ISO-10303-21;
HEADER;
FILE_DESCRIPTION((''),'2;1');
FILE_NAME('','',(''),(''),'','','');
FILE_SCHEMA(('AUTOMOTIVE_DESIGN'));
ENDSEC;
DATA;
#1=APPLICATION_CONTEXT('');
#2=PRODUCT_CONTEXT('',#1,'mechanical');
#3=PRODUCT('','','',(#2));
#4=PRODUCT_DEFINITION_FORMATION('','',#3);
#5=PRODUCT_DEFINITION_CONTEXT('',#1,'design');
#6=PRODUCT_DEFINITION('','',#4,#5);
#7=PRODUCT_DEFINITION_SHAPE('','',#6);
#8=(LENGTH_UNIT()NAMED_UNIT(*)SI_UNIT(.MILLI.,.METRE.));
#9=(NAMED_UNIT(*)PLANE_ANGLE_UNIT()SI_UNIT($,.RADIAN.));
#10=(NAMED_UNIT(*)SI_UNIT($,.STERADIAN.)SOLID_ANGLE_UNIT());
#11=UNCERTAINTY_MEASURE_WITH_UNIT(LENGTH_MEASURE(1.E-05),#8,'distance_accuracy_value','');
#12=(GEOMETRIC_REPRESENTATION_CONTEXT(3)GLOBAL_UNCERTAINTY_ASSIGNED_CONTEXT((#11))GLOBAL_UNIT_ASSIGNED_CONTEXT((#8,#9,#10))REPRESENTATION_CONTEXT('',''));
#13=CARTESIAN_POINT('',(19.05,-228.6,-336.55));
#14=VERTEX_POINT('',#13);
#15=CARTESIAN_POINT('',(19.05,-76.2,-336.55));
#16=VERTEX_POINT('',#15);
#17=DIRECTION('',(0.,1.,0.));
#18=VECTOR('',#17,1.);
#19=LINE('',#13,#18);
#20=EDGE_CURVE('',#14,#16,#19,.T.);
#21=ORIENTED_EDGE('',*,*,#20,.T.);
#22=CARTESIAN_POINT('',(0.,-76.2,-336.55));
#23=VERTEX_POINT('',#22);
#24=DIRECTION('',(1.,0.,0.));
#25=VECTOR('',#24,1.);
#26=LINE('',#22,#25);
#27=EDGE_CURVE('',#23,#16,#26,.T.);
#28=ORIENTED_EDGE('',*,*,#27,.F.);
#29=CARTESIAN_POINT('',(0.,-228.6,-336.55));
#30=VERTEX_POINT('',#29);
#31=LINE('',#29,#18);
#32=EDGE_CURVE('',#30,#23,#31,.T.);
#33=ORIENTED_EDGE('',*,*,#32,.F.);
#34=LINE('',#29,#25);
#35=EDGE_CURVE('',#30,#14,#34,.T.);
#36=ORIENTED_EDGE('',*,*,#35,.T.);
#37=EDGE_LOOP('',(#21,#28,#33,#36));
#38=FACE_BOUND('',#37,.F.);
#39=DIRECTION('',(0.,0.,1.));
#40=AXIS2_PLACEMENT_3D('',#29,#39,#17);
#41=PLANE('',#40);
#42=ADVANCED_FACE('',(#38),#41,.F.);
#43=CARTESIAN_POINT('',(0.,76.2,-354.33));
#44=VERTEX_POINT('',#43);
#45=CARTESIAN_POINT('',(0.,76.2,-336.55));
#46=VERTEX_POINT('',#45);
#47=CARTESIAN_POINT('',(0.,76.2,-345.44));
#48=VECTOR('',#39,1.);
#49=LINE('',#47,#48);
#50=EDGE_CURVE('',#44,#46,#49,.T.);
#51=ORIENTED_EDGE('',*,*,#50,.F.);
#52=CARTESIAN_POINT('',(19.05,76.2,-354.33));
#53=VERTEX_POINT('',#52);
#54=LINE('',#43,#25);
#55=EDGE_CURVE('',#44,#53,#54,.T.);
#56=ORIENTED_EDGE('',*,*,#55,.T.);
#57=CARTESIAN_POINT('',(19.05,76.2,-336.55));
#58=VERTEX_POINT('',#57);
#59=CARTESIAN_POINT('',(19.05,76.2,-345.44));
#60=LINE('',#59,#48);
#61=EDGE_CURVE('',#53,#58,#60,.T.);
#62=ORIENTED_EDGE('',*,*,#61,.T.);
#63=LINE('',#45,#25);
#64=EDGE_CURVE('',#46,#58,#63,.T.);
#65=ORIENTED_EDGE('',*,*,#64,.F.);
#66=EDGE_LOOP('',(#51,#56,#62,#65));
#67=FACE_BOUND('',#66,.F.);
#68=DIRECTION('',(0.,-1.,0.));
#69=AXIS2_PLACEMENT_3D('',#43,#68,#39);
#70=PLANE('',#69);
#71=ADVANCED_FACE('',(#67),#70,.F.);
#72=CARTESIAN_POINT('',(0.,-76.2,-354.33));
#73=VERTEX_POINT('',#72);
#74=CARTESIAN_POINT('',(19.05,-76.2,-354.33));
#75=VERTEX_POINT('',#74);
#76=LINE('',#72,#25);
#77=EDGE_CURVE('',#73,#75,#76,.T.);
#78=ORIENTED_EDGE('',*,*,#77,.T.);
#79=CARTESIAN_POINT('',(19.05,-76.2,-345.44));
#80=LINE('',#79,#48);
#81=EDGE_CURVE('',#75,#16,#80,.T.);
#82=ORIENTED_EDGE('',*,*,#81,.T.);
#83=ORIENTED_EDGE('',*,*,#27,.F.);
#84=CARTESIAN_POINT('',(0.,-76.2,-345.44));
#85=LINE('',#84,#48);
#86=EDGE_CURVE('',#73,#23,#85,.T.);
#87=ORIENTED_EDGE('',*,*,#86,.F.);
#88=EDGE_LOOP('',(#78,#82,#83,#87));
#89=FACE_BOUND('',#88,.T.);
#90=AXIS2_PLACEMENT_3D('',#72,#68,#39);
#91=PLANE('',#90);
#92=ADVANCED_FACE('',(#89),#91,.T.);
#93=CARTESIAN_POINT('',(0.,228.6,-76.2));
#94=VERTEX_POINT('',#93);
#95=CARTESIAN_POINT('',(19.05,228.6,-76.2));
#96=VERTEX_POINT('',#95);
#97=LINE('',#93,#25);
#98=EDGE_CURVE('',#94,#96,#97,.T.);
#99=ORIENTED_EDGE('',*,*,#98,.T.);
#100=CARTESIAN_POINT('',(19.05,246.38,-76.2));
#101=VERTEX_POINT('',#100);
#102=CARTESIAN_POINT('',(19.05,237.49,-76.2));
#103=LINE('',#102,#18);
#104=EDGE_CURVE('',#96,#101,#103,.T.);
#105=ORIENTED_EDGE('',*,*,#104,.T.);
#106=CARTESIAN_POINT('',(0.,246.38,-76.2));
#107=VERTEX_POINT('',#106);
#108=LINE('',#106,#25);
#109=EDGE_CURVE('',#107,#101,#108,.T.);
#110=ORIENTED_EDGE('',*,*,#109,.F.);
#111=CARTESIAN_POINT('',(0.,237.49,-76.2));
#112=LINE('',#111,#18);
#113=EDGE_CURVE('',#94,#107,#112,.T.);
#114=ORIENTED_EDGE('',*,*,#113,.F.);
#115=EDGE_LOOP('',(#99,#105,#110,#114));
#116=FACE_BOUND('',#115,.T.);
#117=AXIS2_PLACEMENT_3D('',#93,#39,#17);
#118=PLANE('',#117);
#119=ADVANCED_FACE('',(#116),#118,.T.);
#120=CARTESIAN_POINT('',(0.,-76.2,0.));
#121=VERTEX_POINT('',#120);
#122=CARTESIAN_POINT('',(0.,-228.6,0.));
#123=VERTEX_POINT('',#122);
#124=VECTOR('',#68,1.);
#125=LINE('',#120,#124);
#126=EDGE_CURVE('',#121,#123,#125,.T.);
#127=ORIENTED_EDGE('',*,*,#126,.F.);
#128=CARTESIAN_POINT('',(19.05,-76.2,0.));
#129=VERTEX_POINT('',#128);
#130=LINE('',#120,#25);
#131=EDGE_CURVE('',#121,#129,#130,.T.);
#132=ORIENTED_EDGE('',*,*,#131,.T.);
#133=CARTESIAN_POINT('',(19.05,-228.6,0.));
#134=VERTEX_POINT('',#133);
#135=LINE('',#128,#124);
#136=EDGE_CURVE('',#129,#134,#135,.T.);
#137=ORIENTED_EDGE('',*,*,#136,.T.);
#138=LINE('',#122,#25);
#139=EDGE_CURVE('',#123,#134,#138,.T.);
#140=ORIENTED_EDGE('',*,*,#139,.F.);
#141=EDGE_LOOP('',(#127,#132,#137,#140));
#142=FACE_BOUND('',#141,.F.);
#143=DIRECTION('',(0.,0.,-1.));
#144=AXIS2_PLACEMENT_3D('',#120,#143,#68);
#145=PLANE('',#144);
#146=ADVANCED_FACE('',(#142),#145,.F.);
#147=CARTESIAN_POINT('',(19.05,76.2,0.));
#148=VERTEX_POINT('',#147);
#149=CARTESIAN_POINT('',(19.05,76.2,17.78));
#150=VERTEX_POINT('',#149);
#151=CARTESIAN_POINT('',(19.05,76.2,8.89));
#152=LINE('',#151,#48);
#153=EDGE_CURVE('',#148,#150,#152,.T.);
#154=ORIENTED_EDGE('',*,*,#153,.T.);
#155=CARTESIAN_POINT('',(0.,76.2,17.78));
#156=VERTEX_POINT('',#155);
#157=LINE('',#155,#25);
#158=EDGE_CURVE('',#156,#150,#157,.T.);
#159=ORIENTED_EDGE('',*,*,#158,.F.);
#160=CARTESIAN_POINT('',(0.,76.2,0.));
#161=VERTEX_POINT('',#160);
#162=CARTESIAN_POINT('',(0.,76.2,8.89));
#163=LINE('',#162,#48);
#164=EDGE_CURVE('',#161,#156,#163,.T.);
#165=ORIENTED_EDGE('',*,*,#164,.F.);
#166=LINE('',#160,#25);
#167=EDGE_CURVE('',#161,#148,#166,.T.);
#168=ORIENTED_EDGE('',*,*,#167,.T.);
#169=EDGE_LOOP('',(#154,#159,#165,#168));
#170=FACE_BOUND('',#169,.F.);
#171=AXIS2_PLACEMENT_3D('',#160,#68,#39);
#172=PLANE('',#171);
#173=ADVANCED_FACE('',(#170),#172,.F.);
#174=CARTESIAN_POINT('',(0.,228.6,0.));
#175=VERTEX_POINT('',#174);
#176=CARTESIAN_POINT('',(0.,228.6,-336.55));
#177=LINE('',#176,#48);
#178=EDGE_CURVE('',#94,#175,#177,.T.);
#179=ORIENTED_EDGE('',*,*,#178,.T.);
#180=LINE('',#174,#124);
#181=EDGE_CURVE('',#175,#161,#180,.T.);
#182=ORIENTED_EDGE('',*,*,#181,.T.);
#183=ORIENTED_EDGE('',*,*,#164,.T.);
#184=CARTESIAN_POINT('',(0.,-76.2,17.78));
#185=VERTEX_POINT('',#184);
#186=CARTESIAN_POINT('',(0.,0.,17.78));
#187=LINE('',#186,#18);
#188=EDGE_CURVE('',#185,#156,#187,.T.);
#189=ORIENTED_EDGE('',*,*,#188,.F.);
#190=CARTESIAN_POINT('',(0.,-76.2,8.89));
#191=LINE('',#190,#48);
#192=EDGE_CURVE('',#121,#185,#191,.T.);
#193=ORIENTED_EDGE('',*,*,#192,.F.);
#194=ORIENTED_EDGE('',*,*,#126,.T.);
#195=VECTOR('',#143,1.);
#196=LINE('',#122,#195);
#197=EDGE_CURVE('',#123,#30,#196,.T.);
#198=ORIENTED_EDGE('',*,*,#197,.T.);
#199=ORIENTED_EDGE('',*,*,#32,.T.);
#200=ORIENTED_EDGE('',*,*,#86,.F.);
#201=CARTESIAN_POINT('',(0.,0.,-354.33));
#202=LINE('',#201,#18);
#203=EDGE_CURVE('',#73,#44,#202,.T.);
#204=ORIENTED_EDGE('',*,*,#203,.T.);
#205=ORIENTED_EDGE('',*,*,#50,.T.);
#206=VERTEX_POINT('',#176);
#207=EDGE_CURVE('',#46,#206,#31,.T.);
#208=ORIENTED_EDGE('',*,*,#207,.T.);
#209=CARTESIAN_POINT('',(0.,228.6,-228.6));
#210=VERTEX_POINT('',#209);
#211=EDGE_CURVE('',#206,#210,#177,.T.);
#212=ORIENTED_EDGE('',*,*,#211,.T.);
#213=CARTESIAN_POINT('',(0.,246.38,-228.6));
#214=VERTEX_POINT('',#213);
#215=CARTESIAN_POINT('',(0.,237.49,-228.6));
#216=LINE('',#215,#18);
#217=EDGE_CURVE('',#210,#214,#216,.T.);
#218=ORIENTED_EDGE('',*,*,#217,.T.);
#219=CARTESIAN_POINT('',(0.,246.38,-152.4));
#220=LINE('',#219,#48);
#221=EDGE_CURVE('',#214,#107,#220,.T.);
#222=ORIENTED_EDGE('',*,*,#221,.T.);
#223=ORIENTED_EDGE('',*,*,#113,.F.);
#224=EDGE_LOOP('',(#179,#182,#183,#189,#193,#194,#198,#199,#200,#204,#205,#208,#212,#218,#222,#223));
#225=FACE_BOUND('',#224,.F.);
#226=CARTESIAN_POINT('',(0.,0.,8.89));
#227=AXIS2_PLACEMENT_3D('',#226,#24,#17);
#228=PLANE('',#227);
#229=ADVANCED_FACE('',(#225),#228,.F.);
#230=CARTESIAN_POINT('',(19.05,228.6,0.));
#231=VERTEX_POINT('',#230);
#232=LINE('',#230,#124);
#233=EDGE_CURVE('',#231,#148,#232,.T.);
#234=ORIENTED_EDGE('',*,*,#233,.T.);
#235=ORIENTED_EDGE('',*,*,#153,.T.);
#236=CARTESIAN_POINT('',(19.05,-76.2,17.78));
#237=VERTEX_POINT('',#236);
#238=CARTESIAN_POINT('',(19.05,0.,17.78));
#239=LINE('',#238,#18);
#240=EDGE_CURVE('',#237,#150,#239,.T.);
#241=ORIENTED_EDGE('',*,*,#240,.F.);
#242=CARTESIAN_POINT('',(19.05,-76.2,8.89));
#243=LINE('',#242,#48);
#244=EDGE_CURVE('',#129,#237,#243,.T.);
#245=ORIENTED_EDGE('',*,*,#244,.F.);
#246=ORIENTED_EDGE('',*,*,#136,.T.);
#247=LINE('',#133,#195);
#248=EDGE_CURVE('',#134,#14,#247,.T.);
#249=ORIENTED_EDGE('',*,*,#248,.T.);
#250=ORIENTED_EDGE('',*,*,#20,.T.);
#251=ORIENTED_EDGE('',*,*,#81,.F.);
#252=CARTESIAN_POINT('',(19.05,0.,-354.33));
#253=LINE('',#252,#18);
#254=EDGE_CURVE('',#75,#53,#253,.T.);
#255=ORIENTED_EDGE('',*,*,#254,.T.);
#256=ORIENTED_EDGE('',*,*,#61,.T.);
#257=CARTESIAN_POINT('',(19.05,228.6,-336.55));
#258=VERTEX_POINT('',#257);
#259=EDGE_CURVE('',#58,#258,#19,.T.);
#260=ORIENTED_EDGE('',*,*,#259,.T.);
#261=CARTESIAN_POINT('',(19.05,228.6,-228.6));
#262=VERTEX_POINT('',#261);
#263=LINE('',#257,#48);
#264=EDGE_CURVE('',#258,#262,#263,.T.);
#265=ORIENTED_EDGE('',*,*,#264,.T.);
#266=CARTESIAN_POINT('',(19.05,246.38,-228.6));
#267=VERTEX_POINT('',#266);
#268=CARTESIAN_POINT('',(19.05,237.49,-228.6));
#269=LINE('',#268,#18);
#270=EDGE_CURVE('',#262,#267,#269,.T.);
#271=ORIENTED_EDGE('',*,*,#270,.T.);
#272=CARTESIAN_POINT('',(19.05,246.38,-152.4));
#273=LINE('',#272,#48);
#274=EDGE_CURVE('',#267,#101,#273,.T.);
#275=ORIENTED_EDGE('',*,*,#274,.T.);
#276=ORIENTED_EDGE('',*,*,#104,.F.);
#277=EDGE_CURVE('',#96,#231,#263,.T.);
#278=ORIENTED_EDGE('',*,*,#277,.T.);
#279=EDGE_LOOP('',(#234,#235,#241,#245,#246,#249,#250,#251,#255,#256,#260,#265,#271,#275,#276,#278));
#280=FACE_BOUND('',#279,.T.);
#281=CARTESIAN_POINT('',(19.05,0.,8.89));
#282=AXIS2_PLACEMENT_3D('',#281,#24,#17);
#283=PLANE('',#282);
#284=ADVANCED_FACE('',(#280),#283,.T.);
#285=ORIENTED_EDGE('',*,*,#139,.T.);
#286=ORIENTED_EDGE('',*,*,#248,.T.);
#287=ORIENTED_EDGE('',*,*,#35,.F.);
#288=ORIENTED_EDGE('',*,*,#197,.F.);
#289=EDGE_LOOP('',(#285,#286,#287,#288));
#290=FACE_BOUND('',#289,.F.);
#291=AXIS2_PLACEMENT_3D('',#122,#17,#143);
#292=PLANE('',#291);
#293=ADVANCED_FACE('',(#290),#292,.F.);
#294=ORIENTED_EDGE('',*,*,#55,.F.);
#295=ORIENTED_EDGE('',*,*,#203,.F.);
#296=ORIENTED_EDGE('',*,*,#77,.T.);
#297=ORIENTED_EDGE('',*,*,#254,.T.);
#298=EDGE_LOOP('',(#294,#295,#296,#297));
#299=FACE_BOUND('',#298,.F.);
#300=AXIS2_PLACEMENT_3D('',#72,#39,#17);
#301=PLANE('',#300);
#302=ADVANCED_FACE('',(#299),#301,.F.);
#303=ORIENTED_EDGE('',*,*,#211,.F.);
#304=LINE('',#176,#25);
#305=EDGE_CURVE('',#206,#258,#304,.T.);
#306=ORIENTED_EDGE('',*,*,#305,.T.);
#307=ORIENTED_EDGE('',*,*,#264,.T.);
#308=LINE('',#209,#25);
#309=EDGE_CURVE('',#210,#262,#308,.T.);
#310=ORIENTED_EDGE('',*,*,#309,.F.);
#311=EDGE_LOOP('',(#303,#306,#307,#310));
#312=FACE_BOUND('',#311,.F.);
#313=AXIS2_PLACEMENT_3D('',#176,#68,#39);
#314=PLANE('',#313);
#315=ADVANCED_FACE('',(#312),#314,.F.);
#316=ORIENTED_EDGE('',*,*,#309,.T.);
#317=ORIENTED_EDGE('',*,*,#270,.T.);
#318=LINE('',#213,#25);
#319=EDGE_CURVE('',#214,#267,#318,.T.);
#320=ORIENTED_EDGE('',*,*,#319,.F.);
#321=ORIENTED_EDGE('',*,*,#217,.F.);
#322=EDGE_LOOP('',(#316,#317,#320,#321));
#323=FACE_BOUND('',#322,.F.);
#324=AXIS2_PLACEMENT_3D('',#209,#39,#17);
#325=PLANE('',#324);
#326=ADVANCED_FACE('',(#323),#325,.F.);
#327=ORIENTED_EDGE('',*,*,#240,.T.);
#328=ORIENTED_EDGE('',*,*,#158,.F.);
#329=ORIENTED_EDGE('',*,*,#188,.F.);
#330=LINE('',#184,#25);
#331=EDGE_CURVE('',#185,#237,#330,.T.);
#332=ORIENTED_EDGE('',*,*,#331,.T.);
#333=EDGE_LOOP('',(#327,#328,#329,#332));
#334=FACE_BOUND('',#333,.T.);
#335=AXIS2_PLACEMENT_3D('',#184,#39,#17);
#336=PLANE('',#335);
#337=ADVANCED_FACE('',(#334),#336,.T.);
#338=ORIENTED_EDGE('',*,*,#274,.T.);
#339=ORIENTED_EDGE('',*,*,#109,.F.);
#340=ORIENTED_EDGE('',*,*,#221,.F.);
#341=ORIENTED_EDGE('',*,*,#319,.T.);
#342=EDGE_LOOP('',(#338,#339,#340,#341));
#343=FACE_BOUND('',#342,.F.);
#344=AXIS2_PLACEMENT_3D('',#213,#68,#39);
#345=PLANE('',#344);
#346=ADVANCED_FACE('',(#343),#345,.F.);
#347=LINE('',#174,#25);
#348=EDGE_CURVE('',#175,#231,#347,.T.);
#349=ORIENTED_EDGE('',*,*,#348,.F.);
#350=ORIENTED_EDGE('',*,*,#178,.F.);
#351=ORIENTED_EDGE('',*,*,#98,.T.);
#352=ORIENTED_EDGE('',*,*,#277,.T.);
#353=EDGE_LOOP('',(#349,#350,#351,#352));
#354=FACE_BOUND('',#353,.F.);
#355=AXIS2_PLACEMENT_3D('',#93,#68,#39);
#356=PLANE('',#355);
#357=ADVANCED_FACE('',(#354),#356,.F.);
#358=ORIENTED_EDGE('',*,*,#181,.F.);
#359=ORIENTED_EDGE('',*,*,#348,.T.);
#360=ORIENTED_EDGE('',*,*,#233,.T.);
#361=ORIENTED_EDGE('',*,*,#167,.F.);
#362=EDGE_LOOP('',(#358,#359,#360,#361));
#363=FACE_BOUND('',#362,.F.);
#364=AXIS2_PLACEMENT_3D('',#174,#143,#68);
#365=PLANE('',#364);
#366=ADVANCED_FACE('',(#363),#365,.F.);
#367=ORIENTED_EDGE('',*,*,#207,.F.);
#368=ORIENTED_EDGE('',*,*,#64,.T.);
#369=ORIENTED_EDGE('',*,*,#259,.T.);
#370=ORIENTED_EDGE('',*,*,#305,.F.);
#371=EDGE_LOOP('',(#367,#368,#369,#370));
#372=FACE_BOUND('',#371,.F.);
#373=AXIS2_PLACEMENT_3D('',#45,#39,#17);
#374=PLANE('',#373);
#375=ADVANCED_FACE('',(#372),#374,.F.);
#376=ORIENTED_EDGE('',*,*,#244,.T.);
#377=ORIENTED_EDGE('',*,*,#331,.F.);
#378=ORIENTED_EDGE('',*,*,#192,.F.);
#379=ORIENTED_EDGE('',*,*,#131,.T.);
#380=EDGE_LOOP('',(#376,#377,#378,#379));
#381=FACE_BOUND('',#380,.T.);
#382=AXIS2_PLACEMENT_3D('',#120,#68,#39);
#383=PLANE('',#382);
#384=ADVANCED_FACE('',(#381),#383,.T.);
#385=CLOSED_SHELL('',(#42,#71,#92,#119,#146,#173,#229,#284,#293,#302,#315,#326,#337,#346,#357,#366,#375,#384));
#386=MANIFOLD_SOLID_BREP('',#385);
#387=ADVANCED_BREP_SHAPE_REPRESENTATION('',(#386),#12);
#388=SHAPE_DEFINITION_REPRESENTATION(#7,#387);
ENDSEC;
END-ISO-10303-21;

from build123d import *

# Parameters (mm, degrees)
F0_W     = 152.4
F0_H     = 17.78
F0_W_2   = 17.78
F0_H_2   = 152.4
F1_DEPTH = 19.05


# Not quite as in the source:
# - a feature names something its author has since deleted; it is built from what else it names


with BuildPart() as f1:
    # F0 (on Right) → F1 (new body)
    with BuildSketch(Plane.YZ):
        with Locations((0, 8.89)):
            Rectangle(F0_W, F0_H)
        Polygon((-76.2, 0), (-228.6, 0), (-228.6, -336.55), (-76.2, -336.55), (76.2, -336.55), (228.6, -336.55), (228.6, -228.6), (228.6, -76.2), (228.6, 0), (76.2, 0), align=None)
        with Locations((237.49, -152.4)):
            Rectangle(F0_W_2, F0_H_2)
        with Locations((0, -345.44)):
            Rectangle(F0_W, F0_H)
    extrude(amount=F1_DEPTH)


solid = f1.part
